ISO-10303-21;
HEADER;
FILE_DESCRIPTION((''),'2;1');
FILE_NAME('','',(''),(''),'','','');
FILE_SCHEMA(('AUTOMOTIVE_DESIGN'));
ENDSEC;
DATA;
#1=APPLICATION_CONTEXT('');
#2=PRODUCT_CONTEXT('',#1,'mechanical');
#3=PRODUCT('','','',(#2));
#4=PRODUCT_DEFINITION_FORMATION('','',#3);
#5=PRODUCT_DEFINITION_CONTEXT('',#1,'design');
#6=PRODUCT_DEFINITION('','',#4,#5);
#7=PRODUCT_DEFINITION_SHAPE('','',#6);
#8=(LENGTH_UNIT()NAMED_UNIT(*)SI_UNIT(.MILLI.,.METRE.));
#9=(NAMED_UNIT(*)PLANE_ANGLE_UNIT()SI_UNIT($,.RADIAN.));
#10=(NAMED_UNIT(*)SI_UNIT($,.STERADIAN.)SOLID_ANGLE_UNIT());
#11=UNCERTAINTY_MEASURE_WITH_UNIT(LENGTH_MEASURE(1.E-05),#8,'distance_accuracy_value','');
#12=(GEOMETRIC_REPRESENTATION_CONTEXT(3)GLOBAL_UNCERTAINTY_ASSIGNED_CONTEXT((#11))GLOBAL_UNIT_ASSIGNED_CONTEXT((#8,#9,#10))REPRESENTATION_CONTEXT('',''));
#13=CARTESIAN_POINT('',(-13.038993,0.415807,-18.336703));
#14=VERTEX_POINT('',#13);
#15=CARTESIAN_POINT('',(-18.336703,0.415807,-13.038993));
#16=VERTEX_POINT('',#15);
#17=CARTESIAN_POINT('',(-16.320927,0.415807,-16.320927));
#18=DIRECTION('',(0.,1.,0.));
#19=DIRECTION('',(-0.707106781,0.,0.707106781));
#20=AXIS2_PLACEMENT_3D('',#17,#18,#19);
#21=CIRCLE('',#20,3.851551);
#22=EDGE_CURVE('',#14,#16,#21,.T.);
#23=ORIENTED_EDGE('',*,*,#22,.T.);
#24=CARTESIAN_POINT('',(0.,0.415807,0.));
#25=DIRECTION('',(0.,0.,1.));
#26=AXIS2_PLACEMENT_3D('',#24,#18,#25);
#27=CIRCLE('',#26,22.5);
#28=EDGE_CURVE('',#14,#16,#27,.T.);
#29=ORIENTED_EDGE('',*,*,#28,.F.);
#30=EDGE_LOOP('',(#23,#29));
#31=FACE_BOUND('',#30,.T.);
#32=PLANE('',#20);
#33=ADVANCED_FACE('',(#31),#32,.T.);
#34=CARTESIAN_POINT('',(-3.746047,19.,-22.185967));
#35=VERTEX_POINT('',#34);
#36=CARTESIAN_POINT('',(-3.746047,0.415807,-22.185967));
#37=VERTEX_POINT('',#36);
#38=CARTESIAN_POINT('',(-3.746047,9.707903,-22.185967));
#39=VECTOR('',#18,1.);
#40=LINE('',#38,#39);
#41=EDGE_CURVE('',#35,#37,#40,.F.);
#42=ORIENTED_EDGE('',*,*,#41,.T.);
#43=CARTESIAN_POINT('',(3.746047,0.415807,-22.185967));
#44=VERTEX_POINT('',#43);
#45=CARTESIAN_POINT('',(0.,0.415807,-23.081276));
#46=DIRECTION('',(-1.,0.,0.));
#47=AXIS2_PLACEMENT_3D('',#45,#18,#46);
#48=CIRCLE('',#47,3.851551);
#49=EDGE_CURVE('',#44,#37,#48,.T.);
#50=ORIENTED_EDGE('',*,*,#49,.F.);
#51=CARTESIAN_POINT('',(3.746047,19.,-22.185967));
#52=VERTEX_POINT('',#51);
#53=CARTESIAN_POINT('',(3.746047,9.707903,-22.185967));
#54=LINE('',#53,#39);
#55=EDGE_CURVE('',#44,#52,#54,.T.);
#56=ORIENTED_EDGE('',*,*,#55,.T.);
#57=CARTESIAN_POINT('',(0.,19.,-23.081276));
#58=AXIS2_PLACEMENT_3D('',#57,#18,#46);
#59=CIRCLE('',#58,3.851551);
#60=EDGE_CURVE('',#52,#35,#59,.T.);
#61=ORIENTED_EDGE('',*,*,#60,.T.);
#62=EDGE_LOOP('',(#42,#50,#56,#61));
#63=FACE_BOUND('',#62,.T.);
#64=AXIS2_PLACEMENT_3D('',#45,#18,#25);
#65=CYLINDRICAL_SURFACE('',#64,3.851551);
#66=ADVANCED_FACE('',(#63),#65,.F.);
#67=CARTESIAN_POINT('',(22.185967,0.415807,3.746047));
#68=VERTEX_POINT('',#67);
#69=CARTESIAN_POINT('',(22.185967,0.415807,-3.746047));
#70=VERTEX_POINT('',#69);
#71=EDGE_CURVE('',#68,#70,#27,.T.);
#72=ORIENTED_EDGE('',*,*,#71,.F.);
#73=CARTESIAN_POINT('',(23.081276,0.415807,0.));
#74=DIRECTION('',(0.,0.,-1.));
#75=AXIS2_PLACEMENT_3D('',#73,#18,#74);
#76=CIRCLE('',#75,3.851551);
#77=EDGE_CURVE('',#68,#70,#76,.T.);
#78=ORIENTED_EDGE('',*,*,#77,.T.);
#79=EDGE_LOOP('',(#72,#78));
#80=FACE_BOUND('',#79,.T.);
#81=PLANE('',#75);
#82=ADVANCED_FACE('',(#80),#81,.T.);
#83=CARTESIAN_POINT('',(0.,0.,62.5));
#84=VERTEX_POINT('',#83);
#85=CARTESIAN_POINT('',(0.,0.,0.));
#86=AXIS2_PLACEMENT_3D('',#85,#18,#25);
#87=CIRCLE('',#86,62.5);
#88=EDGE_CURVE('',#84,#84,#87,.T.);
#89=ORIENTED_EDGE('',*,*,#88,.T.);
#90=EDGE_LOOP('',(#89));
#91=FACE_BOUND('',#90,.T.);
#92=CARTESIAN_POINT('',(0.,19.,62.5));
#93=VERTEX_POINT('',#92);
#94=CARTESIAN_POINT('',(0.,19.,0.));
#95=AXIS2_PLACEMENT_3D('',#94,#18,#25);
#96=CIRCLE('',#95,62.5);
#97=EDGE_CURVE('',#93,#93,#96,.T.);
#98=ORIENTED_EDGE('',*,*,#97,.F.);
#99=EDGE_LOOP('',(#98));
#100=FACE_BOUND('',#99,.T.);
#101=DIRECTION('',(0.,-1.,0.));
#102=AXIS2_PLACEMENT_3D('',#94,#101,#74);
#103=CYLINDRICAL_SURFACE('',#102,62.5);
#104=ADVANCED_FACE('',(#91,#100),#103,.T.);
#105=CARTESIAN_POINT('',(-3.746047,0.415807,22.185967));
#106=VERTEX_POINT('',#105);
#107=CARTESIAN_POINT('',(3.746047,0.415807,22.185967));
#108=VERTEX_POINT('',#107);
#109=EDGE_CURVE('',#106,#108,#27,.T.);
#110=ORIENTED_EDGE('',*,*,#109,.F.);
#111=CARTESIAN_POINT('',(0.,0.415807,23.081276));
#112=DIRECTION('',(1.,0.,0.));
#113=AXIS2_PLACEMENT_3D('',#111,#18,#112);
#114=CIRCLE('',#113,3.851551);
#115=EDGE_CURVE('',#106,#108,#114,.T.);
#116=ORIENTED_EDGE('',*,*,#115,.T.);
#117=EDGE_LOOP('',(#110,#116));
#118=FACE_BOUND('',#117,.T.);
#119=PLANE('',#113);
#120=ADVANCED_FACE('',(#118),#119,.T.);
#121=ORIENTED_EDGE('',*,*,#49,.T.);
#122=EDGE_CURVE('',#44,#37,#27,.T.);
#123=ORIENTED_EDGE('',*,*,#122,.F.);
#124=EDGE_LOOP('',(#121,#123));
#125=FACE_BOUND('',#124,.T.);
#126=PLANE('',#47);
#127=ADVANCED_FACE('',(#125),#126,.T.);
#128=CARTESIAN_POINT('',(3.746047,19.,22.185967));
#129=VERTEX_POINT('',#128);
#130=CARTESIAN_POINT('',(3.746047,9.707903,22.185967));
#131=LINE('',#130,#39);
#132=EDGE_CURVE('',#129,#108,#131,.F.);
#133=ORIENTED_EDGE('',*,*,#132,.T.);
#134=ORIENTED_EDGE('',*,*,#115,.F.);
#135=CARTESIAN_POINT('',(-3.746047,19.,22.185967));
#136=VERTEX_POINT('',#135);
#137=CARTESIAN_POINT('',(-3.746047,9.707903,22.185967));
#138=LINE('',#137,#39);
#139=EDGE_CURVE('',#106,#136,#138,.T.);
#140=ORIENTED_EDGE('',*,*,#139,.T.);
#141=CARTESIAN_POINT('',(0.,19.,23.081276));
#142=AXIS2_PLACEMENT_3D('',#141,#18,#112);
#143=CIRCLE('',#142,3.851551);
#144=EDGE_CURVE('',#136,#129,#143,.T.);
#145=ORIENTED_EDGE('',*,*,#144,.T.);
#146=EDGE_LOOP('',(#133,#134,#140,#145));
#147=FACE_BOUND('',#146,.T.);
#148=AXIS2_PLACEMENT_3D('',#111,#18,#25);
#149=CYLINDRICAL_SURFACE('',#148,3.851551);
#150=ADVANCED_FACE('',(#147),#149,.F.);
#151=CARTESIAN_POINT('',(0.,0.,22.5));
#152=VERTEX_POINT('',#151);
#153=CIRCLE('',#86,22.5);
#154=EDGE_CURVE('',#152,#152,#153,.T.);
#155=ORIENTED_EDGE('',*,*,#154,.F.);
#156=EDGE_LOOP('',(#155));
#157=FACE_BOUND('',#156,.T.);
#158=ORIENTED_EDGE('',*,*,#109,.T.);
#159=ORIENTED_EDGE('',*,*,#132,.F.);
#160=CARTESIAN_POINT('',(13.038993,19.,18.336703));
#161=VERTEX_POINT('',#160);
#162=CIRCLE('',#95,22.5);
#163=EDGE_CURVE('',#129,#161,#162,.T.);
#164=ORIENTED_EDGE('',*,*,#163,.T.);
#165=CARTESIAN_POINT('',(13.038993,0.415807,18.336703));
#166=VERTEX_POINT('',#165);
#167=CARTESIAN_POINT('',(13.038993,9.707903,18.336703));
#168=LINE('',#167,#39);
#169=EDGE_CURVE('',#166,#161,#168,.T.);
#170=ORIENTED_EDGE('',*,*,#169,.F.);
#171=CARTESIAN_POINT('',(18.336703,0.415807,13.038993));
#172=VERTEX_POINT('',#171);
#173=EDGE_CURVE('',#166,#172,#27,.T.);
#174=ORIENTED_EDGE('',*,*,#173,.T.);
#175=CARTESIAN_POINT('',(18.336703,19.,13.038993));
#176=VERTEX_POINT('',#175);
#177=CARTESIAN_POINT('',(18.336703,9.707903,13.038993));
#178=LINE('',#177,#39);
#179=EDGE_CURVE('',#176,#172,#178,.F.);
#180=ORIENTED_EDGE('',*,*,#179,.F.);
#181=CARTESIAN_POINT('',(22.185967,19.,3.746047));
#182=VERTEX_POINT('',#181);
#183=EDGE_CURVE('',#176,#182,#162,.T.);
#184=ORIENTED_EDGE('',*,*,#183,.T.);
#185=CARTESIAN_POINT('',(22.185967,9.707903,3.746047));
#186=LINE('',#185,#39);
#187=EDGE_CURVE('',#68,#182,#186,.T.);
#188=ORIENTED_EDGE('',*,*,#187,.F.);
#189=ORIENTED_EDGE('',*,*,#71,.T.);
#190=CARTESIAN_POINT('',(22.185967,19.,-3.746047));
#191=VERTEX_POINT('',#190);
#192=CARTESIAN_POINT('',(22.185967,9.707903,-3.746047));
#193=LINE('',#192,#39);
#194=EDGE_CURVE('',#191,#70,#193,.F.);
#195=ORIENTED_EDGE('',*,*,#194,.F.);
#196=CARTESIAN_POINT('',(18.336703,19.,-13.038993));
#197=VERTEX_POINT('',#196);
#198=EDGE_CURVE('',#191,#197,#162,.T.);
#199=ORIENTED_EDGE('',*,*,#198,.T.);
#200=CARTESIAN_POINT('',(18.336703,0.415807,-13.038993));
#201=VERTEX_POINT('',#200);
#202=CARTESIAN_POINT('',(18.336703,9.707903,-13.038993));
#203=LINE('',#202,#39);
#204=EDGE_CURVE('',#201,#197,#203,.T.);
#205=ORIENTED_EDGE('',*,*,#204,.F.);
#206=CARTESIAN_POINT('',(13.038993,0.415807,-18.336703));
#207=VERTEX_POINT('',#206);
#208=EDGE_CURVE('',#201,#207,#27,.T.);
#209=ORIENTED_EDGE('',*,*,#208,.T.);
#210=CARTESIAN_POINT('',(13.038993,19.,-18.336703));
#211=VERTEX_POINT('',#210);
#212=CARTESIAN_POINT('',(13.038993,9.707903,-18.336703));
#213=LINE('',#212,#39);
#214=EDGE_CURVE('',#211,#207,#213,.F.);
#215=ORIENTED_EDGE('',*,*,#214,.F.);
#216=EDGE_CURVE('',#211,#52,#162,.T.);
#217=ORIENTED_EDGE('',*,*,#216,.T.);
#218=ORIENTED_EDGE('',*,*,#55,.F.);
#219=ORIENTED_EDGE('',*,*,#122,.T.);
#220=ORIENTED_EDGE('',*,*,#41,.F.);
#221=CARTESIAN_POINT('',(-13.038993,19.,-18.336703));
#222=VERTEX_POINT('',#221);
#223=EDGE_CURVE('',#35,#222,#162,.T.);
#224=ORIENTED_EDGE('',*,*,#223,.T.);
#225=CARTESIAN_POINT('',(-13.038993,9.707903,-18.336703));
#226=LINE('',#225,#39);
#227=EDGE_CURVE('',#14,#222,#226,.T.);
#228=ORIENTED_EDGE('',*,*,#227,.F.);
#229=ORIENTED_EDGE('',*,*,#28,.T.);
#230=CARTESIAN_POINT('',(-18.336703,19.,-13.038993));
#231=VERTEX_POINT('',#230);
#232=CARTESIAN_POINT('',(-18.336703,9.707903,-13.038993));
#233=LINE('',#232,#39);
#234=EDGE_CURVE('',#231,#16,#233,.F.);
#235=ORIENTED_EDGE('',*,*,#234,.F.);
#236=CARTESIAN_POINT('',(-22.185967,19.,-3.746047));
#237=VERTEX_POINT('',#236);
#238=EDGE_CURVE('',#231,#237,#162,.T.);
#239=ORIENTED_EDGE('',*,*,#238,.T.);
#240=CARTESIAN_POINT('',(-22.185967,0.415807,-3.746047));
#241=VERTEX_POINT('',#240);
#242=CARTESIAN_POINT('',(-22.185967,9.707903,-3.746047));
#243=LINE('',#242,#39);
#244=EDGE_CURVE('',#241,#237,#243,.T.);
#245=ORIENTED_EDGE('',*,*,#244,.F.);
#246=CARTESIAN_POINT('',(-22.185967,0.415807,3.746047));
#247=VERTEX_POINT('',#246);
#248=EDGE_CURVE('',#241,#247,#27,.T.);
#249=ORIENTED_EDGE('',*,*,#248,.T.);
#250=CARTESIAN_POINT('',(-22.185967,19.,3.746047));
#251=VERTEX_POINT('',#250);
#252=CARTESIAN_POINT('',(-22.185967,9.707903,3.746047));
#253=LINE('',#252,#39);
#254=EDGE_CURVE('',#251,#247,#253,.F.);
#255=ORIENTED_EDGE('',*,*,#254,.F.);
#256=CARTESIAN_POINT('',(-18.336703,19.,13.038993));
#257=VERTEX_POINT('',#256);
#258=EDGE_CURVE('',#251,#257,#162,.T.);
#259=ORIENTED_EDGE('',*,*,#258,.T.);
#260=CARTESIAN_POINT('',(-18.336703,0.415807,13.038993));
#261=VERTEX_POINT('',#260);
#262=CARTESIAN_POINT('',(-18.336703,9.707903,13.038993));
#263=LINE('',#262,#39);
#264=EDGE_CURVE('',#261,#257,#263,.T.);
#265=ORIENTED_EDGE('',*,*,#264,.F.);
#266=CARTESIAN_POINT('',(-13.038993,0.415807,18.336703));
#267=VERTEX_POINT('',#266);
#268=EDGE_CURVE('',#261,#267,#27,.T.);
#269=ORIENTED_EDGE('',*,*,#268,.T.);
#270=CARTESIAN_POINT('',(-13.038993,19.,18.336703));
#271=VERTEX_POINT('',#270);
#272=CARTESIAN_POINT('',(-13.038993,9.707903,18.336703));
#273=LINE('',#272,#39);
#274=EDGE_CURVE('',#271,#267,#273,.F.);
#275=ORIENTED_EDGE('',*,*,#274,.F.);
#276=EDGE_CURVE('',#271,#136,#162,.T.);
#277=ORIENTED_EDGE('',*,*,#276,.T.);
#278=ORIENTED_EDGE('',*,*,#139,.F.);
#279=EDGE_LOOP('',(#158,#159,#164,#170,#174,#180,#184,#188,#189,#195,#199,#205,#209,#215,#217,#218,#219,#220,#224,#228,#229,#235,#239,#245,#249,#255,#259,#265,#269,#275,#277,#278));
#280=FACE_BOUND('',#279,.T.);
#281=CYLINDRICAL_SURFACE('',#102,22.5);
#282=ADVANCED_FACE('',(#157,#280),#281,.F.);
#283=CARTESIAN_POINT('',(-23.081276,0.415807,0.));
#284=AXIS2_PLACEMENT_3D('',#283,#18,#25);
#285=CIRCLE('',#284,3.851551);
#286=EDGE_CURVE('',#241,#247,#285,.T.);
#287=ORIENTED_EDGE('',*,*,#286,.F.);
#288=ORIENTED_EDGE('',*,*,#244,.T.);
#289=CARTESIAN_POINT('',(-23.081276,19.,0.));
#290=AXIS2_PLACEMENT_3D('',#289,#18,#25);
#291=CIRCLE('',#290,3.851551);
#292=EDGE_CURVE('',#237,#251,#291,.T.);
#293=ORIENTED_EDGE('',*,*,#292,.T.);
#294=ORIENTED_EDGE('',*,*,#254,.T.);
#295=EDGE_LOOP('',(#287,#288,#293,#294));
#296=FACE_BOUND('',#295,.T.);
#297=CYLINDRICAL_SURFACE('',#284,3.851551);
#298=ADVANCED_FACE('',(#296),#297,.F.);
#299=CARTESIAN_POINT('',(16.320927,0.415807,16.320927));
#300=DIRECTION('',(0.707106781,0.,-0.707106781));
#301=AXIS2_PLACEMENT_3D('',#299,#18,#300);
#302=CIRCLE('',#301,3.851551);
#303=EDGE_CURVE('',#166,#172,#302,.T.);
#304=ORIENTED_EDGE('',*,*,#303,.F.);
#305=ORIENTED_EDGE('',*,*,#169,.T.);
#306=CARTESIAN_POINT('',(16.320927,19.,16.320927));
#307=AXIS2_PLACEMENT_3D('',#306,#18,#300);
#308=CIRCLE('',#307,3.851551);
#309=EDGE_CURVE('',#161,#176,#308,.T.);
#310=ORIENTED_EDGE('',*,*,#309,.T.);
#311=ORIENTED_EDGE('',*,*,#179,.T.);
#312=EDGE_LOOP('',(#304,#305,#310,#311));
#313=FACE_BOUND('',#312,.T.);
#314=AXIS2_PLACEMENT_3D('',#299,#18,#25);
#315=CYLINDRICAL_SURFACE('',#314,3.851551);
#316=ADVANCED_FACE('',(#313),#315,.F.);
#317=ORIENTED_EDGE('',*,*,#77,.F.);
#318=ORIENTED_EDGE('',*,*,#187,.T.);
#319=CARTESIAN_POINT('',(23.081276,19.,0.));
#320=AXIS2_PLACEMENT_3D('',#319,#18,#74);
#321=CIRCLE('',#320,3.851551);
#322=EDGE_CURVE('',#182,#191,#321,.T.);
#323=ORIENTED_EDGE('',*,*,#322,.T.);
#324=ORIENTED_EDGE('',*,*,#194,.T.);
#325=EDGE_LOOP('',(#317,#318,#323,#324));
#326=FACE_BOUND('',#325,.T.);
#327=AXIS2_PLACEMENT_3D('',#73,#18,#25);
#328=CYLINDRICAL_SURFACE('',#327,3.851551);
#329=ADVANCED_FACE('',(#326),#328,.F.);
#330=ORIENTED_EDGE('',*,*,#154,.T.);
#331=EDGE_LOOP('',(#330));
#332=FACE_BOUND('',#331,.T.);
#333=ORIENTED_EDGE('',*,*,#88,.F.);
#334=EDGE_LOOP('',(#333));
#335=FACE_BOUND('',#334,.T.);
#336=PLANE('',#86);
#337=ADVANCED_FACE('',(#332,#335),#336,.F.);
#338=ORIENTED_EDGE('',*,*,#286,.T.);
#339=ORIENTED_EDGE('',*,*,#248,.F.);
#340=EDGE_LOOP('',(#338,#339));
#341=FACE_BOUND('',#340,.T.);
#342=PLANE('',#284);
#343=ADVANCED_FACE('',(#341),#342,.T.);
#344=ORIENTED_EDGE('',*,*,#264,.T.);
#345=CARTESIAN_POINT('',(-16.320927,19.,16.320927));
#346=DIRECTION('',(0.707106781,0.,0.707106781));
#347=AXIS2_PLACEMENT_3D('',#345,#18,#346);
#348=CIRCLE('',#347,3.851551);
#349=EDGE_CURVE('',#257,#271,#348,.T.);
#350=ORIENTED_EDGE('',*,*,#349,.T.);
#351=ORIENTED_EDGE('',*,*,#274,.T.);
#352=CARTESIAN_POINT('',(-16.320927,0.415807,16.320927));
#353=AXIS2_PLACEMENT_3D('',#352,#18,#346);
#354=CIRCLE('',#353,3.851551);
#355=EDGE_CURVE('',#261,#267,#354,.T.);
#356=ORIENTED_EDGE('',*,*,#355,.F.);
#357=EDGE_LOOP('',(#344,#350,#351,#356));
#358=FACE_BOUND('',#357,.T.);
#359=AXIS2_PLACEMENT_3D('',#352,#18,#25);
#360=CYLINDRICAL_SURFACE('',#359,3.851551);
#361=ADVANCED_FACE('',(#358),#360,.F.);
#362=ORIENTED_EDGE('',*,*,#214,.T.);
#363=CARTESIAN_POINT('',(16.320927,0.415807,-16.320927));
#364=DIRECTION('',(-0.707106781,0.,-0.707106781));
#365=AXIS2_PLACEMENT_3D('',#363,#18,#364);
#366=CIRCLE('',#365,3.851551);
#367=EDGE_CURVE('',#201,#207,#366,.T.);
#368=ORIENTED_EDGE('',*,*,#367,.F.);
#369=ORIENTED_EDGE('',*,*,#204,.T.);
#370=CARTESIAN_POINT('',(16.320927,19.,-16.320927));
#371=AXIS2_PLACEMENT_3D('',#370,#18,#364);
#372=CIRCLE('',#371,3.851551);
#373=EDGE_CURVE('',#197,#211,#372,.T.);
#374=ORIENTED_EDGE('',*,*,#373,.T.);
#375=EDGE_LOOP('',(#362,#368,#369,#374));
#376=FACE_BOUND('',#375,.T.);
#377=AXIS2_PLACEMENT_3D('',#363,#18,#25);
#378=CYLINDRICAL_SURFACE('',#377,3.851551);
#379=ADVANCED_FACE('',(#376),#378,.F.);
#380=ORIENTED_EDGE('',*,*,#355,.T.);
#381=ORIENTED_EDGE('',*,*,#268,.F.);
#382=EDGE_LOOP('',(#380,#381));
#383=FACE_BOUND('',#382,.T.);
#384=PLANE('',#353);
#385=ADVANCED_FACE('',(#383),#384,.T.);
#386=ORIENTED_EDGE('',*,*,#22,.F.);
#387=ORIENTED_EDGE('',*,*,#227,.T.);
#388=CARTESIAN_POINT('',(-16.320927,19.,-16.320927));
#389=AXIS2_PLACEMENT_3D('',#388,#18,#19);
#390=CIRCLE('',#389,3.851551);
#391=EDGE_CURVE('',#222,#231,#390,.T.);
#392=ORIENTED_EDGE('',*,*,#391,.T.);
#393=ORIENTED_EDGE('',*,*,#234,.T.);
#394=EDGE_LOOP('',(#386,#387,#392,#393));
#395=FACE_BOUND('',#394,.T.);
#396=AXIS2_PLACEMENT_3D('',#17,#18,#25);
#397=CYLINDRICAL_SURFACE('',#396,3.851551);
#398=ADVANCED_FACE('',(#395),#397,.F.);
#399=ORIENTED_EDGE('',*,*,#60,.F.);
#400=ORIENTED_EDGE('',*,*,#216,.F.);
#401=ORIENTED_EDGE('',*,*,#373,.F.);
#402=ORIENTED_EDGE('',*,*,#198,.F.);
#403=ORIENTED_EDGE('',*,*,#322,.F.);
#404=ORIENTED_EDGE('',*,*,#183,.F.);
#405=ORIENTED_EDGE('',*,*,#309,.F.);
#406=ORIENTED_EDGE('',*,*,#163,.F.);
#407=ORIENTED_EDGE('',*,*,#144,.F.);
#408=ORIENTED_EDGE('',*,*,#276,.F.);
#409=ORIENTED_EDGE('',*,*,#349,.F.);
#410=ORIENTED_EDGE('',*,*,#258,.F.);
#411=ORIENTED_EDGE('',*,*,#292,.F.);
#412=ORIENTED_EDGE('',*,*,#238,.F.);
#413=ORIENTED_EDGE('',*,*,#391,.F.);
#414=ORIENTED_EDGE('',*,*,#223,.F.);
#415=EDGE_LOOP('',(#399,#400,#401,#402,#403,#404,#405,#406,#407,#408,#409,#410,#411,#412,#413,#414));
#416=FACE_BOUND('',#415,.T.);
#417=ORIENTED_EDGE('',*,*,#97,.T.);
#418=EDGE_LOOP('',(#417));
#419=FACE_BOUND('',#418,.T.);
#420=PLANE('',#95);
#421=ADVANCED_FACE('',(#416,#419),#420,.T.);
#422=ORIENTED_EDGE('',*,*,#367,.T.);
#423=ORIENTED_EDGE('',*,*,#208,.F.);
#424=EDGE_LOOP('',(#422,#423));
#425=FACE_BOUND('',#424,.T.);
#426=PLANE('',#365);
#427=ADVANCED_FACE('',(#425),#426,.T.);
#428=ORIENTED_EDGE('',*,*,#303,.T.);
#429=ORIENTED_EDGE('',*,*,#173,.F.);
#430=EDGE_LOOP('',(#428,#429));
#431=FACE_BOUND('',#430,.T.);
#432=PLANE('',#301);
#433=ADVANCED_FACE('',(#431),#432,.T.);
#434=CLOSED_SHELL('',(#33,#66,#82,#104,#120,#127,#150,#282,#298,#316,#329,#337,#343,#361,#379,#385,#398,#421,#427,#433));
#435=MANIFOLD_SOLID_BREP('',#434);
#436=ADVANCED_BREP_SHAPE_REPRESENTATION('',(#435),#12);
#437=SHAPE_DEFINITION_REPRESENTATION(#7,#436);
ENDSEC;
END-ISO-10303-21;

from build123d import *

# Parameters (mm, degrees)
SKETCH1_R           = 62.5
BOSS_EXTRUDE1_DEPTH = 19
SKETCH2_R           = 22.5
CUT_EXTRUDE1_DEPTH  = 91.407411201
SKETCH3_R           = 3.851550946
CUT_EXTRUDE2_DEPTH  = 18.584193111
CIRPATTERN1_COUNT   = 8


with BuildPart() as part:
    # Sketch1 → Boss-Extrude1 (new body)
    with BuildSketch(Plane(origin=(0, 0, 0), x_dir=(1, 0, 0), z_dir=(0, 1, 0))):
        Circle(SKETCH1_R)
    extrude(amount=BOSS_EXTRUDE1_DEPTH)

    # Sketch2 → Cut-Extrude1 (cut, through all)
    with BuildSketch(Plane(origin=(0, 0, 0), x_dir=(1, 0, 0), z_dir=(0, 1, 0))):
        Circle(SKETCH2_R)
    extrude(amount=CUT_EXTRUDE1_DEPTH, mode=Mode.SUBTRACT)

    # Sketch3 → Cut-Extrude2 (cut)
    with BuildSketch(Plane(origin=(0, 19, 0), x_dir=(1, 0, 0), z_dir=(0, 1, 0))):
        with Locations((-23.081275633, 0)):
            Circle(SKETCH3_R)
    cut_extrude2 = extrude(amount=-CUT_EXTRUDE2_DEPTH, mode=Mode.SUBTRACT)

    # CirPattern1: Cut-Extrude2 ×8 about axis
    cirpattern1_axis = Axis((0, 0, 0), (0, 1, 0))
    for i in range(1, CIRPATTERN1_COUNT):
        add(cut_extrude2.rotate(cirpattern1_axis, i * 360 / CIRPATTERN1_COUNT), mode=Mode.SUBTRACT)


solid = part.part
